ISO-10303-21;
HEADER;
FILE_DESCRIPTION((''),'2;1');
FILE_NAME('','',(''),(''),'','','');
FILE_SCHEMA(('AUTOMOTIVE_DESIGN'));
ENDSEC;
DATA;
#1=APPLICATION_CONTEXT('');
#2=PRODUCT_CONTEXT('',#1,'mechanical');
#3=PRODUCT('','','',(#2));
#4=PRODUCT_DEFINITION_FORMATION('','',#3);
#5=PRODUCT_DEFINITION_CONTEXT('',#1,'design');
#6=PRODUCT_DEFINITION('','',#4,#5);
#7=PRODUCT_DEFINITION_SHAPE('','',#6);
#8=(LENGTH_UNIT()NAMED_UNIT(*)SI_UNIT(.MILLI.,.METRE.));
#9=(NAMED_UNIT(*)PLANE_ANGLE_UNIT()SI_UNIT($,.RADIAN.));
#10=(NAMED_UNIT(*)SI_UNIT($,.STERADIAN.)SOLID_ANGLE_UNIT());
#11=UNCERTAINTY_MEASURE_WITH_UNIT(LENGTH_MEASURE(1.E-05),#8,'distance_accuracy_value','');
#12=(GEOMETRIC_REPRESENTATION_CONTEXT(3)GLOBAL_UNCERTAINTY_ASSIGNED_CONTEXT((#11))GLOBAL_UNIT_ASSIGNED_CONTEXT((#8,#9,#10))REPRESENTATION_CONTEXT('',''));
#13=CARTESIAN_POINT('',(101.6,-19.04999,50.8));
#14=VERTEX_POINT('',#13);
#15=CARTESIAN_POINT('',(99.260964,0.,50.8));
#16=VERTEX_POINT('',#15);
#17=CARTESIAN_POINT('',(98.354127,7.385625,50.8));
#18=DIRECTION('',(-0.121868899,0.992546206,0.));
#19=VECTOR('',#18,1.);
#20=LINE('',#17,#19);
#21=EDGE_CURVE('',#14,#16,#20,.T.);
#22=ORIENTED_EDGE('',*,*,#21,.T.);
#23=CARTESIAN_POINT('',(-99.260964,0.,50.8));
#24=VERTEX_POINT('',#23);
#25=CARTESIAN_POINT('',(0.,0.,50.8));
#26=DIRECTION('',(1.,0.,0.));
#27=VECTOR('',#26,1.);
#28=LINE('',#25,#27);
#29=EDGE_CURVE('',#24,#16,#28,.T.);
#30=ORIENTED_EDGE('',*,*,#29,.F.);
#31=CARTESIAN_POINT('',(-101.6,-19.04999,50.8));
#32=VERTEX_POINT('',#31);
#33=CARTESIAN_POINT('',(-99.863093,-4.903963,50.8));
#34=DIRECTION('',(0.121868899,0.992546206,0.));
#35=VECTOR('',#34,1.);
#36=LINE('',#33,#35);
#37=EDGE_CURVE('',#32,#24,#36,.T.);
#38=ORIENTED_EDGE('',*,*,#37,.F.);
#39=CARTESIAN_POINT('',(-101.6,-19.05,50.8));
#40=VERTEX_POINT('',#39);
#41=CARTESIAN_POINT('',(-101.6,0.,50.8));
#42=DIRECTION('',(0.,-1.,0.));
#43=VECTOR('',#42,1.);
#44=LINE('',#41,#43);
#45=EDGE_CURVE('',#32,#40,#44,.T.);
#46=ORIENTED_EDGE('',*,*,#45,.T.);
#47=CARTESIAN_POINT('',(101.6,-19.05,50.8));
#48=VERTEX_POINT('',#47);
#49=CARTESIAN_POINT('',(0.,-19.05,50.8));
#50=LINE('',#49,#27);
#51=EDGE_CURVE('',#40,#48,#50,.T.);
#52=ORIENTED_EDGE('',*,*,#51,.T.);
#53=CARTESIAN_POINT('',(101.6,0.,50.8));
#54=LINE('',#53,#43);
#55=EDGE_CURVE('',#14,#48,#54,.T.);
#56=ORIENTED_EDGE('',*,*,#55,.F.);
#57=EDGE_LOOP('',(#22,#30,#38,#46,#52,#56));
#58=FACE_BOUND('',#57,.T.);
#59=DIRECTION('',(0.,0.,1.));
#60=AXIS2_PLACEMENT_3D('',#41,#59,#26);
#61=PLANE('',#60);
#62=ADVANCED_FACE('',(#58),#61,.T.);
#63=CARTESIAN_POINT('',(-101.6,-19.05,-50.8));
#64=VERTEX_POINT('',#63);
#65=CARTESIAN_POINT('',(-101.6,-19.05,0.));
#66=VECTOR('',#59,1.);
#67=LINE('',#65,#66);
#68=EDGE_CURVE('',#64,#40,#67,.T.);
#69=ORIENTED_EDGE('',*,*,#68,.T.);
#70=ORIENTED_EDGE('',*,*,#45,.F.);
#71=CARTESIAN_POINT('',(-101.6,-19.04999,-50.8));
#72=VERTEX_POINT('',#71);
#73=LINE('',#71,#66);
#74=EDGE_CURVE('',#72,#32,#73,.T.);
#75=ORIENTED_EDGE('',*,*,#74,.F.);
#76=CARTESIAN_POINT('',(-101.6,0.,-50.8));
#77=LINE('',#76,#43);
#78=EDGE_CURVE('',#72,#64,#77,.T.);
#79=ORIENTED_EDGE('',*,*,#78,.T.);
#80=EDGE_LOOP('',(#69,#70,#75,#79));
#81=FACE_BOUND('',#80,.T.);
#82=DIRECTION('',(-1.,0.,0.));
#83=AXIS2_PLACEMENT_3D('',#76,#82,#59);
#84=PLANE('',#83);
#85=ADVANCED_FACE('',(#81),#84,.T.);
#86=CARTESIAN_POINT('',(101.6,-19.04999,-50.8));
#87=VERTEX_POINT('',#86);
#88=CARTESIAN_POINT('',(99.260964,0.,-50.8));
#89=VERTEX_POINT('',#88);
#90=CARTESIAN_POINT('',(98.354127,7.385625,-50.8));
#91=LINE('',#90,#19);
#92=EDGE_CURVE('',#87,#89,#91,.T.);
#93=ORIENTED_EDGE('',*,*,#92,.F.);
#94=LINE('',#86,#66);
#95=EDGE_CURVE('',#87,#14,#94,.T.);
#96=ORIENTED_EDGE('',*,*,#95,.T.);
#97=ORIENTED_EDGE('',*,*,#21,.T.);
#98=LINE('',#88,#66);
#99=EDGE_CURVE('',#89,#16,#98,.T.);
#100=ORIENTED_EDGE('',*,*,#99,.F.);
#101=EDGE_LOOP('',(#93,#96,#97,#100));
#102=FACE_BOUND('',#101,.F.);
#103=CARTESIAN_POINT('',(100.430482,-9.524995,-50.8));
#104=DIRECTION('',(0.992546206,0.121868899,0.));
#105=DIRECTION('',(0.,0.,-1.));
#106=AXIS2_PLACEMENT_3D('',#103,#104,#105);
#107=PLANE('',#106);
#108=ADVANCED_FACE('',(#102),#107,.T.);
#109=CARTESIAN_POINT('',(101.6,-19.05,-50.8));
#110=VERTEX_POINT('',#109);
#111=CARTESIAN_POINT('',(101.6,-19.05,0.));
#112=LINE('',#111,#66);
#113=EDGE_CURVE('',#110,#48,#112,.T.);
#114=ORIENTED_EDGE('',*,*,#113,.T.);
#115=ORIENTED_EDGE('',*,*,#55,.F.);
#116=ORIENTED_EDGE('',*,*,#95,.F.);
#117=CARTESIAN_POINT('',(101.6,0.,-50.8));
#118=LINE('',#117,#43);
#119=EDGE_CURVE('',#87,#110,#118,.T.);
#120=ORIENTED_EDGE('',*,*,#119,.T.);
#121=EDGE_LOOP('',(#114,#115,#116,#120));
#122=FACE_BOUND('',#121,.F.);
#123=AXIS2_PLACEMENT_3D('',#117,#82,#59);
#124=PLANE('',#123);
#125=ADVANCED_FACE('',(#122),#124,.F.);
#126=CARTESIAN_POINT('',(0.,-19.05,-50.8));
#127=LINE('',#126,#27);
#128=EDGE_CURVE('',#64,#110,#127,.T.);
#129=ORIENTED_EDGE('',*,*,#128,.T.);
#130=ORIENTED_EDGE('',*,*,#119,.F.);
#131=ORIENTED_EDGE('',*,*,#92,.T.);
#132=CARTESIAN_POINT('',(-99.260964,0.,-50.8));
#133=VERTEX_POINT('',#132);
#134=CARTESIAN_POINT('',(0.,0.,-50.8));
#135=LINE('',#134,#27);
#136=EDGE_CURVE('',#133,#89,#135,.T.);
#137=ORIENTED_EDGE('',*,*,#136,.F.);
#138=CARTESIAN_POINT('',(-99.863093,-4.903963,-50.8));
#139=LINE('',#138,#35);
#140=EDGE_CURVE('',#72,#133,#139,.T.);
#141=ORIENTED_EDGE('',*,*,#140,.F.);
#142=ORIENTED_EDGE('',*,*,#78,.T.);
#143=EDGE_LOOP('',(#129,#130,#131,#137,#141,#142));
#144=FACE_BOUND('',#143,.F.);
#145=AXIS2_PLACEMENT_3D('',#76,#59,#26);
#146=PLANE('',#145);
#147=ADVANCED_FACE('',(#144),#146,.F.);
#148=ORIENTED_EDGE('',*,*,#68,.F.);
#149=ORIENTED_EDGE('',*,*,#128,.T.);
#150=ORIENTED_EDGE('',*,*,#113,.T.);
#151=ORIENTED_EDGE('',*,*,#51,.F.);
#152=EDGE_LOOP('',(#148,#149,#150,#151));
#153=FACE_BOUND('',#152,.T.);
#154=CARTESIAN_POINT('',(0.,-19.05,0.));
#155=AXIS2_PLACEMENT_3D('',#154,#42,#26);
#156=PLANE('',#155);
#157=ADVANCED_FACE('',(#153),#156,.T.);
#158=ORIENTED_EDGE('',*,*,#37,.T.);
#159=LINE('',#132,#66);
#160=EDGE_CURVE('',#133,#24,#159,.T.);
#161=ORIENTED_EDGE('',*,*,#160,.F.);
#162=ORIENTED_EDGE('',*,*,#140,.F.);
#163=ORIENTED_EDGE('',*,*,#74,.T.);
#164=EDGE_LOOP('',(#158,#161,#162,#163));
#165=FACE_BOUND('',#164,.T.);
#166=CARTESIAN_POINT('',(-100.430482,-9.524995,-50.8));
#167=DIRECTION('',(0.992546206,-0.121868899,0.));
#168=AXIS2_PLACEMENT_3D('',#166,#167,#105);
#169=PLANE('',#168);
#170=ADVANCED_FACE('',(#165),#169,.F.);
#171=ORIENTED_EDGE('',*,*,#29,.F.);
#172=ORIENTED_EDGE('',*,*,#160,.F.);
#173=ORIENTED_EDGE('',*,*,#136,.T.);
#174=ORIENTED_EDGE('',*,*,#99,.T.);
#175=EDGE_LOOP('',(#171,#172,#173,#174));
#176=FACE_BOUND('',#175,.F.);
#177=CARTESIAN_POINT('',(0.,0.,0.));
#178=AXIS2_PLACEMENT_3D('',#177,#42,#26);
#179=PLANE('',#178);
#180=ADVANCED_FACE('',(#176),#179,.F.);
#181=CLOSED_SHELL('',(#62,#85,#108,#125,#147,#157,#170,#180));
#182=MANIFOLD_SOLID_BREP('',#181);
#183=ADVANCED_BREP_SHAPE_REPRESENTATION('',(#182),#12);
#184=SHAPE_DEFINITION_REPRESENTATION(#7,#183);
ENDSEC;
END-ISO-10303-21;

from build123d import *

# Parameters (mm, degrees)
F0_W     = 203.2
F0_H     = 101.6
F1_DEPTH = 19.05
F2_SIZE2 = 2.339036
F2_SIZE  = 19.04999
F3_SIZE2 = 2.339036
F3_SIZE  = 19.04999


# Not quite as in the source:
# - a fillet or chamfer is up to 0.001 mm smaller than in the source, because OpenCascade refuses the exact size


with BuildPart() as f1:
    # F0 (on Front) → F1 (new body)
    with BuildSketch(Plane.XZ):
        Rectangle(F0_W, F0_H)
    extrude(amount=F1_DEPTH)

    # F2 (size 19.05 and 2.3390458852 in the source; OpenCascade refuses exactly that, so slightly less here)
    f2_edges = [f1.edges().sort_by_distance(p)[0] for p in [
        (-101.6, 0, 0),
    ]]
    f2_side = f1.faces().sort_by_distance((-101.6, -9.525, 0))[0]
    chamfer(f2_edges, length=F2_SIZE, length2=F2_SIZE2, reference=f2_side)

    # F3 (size 19.05 and 2.3390458852 in the source; OpenCascade refuses exactly that, so slightly less here)
    f3_edges = [f1.edges().sort_by_distance(p)[0] for p in [
        (101.6, 0, 0),
    ]]
    f3_side = f1.faces().sort_by_distance((101.6, -9.525, 0))[0]
    chamfer(f3_edges, length=F3_SIZE, length2=F3_SIZE2, reference=f3_side)


solid = f1.part
